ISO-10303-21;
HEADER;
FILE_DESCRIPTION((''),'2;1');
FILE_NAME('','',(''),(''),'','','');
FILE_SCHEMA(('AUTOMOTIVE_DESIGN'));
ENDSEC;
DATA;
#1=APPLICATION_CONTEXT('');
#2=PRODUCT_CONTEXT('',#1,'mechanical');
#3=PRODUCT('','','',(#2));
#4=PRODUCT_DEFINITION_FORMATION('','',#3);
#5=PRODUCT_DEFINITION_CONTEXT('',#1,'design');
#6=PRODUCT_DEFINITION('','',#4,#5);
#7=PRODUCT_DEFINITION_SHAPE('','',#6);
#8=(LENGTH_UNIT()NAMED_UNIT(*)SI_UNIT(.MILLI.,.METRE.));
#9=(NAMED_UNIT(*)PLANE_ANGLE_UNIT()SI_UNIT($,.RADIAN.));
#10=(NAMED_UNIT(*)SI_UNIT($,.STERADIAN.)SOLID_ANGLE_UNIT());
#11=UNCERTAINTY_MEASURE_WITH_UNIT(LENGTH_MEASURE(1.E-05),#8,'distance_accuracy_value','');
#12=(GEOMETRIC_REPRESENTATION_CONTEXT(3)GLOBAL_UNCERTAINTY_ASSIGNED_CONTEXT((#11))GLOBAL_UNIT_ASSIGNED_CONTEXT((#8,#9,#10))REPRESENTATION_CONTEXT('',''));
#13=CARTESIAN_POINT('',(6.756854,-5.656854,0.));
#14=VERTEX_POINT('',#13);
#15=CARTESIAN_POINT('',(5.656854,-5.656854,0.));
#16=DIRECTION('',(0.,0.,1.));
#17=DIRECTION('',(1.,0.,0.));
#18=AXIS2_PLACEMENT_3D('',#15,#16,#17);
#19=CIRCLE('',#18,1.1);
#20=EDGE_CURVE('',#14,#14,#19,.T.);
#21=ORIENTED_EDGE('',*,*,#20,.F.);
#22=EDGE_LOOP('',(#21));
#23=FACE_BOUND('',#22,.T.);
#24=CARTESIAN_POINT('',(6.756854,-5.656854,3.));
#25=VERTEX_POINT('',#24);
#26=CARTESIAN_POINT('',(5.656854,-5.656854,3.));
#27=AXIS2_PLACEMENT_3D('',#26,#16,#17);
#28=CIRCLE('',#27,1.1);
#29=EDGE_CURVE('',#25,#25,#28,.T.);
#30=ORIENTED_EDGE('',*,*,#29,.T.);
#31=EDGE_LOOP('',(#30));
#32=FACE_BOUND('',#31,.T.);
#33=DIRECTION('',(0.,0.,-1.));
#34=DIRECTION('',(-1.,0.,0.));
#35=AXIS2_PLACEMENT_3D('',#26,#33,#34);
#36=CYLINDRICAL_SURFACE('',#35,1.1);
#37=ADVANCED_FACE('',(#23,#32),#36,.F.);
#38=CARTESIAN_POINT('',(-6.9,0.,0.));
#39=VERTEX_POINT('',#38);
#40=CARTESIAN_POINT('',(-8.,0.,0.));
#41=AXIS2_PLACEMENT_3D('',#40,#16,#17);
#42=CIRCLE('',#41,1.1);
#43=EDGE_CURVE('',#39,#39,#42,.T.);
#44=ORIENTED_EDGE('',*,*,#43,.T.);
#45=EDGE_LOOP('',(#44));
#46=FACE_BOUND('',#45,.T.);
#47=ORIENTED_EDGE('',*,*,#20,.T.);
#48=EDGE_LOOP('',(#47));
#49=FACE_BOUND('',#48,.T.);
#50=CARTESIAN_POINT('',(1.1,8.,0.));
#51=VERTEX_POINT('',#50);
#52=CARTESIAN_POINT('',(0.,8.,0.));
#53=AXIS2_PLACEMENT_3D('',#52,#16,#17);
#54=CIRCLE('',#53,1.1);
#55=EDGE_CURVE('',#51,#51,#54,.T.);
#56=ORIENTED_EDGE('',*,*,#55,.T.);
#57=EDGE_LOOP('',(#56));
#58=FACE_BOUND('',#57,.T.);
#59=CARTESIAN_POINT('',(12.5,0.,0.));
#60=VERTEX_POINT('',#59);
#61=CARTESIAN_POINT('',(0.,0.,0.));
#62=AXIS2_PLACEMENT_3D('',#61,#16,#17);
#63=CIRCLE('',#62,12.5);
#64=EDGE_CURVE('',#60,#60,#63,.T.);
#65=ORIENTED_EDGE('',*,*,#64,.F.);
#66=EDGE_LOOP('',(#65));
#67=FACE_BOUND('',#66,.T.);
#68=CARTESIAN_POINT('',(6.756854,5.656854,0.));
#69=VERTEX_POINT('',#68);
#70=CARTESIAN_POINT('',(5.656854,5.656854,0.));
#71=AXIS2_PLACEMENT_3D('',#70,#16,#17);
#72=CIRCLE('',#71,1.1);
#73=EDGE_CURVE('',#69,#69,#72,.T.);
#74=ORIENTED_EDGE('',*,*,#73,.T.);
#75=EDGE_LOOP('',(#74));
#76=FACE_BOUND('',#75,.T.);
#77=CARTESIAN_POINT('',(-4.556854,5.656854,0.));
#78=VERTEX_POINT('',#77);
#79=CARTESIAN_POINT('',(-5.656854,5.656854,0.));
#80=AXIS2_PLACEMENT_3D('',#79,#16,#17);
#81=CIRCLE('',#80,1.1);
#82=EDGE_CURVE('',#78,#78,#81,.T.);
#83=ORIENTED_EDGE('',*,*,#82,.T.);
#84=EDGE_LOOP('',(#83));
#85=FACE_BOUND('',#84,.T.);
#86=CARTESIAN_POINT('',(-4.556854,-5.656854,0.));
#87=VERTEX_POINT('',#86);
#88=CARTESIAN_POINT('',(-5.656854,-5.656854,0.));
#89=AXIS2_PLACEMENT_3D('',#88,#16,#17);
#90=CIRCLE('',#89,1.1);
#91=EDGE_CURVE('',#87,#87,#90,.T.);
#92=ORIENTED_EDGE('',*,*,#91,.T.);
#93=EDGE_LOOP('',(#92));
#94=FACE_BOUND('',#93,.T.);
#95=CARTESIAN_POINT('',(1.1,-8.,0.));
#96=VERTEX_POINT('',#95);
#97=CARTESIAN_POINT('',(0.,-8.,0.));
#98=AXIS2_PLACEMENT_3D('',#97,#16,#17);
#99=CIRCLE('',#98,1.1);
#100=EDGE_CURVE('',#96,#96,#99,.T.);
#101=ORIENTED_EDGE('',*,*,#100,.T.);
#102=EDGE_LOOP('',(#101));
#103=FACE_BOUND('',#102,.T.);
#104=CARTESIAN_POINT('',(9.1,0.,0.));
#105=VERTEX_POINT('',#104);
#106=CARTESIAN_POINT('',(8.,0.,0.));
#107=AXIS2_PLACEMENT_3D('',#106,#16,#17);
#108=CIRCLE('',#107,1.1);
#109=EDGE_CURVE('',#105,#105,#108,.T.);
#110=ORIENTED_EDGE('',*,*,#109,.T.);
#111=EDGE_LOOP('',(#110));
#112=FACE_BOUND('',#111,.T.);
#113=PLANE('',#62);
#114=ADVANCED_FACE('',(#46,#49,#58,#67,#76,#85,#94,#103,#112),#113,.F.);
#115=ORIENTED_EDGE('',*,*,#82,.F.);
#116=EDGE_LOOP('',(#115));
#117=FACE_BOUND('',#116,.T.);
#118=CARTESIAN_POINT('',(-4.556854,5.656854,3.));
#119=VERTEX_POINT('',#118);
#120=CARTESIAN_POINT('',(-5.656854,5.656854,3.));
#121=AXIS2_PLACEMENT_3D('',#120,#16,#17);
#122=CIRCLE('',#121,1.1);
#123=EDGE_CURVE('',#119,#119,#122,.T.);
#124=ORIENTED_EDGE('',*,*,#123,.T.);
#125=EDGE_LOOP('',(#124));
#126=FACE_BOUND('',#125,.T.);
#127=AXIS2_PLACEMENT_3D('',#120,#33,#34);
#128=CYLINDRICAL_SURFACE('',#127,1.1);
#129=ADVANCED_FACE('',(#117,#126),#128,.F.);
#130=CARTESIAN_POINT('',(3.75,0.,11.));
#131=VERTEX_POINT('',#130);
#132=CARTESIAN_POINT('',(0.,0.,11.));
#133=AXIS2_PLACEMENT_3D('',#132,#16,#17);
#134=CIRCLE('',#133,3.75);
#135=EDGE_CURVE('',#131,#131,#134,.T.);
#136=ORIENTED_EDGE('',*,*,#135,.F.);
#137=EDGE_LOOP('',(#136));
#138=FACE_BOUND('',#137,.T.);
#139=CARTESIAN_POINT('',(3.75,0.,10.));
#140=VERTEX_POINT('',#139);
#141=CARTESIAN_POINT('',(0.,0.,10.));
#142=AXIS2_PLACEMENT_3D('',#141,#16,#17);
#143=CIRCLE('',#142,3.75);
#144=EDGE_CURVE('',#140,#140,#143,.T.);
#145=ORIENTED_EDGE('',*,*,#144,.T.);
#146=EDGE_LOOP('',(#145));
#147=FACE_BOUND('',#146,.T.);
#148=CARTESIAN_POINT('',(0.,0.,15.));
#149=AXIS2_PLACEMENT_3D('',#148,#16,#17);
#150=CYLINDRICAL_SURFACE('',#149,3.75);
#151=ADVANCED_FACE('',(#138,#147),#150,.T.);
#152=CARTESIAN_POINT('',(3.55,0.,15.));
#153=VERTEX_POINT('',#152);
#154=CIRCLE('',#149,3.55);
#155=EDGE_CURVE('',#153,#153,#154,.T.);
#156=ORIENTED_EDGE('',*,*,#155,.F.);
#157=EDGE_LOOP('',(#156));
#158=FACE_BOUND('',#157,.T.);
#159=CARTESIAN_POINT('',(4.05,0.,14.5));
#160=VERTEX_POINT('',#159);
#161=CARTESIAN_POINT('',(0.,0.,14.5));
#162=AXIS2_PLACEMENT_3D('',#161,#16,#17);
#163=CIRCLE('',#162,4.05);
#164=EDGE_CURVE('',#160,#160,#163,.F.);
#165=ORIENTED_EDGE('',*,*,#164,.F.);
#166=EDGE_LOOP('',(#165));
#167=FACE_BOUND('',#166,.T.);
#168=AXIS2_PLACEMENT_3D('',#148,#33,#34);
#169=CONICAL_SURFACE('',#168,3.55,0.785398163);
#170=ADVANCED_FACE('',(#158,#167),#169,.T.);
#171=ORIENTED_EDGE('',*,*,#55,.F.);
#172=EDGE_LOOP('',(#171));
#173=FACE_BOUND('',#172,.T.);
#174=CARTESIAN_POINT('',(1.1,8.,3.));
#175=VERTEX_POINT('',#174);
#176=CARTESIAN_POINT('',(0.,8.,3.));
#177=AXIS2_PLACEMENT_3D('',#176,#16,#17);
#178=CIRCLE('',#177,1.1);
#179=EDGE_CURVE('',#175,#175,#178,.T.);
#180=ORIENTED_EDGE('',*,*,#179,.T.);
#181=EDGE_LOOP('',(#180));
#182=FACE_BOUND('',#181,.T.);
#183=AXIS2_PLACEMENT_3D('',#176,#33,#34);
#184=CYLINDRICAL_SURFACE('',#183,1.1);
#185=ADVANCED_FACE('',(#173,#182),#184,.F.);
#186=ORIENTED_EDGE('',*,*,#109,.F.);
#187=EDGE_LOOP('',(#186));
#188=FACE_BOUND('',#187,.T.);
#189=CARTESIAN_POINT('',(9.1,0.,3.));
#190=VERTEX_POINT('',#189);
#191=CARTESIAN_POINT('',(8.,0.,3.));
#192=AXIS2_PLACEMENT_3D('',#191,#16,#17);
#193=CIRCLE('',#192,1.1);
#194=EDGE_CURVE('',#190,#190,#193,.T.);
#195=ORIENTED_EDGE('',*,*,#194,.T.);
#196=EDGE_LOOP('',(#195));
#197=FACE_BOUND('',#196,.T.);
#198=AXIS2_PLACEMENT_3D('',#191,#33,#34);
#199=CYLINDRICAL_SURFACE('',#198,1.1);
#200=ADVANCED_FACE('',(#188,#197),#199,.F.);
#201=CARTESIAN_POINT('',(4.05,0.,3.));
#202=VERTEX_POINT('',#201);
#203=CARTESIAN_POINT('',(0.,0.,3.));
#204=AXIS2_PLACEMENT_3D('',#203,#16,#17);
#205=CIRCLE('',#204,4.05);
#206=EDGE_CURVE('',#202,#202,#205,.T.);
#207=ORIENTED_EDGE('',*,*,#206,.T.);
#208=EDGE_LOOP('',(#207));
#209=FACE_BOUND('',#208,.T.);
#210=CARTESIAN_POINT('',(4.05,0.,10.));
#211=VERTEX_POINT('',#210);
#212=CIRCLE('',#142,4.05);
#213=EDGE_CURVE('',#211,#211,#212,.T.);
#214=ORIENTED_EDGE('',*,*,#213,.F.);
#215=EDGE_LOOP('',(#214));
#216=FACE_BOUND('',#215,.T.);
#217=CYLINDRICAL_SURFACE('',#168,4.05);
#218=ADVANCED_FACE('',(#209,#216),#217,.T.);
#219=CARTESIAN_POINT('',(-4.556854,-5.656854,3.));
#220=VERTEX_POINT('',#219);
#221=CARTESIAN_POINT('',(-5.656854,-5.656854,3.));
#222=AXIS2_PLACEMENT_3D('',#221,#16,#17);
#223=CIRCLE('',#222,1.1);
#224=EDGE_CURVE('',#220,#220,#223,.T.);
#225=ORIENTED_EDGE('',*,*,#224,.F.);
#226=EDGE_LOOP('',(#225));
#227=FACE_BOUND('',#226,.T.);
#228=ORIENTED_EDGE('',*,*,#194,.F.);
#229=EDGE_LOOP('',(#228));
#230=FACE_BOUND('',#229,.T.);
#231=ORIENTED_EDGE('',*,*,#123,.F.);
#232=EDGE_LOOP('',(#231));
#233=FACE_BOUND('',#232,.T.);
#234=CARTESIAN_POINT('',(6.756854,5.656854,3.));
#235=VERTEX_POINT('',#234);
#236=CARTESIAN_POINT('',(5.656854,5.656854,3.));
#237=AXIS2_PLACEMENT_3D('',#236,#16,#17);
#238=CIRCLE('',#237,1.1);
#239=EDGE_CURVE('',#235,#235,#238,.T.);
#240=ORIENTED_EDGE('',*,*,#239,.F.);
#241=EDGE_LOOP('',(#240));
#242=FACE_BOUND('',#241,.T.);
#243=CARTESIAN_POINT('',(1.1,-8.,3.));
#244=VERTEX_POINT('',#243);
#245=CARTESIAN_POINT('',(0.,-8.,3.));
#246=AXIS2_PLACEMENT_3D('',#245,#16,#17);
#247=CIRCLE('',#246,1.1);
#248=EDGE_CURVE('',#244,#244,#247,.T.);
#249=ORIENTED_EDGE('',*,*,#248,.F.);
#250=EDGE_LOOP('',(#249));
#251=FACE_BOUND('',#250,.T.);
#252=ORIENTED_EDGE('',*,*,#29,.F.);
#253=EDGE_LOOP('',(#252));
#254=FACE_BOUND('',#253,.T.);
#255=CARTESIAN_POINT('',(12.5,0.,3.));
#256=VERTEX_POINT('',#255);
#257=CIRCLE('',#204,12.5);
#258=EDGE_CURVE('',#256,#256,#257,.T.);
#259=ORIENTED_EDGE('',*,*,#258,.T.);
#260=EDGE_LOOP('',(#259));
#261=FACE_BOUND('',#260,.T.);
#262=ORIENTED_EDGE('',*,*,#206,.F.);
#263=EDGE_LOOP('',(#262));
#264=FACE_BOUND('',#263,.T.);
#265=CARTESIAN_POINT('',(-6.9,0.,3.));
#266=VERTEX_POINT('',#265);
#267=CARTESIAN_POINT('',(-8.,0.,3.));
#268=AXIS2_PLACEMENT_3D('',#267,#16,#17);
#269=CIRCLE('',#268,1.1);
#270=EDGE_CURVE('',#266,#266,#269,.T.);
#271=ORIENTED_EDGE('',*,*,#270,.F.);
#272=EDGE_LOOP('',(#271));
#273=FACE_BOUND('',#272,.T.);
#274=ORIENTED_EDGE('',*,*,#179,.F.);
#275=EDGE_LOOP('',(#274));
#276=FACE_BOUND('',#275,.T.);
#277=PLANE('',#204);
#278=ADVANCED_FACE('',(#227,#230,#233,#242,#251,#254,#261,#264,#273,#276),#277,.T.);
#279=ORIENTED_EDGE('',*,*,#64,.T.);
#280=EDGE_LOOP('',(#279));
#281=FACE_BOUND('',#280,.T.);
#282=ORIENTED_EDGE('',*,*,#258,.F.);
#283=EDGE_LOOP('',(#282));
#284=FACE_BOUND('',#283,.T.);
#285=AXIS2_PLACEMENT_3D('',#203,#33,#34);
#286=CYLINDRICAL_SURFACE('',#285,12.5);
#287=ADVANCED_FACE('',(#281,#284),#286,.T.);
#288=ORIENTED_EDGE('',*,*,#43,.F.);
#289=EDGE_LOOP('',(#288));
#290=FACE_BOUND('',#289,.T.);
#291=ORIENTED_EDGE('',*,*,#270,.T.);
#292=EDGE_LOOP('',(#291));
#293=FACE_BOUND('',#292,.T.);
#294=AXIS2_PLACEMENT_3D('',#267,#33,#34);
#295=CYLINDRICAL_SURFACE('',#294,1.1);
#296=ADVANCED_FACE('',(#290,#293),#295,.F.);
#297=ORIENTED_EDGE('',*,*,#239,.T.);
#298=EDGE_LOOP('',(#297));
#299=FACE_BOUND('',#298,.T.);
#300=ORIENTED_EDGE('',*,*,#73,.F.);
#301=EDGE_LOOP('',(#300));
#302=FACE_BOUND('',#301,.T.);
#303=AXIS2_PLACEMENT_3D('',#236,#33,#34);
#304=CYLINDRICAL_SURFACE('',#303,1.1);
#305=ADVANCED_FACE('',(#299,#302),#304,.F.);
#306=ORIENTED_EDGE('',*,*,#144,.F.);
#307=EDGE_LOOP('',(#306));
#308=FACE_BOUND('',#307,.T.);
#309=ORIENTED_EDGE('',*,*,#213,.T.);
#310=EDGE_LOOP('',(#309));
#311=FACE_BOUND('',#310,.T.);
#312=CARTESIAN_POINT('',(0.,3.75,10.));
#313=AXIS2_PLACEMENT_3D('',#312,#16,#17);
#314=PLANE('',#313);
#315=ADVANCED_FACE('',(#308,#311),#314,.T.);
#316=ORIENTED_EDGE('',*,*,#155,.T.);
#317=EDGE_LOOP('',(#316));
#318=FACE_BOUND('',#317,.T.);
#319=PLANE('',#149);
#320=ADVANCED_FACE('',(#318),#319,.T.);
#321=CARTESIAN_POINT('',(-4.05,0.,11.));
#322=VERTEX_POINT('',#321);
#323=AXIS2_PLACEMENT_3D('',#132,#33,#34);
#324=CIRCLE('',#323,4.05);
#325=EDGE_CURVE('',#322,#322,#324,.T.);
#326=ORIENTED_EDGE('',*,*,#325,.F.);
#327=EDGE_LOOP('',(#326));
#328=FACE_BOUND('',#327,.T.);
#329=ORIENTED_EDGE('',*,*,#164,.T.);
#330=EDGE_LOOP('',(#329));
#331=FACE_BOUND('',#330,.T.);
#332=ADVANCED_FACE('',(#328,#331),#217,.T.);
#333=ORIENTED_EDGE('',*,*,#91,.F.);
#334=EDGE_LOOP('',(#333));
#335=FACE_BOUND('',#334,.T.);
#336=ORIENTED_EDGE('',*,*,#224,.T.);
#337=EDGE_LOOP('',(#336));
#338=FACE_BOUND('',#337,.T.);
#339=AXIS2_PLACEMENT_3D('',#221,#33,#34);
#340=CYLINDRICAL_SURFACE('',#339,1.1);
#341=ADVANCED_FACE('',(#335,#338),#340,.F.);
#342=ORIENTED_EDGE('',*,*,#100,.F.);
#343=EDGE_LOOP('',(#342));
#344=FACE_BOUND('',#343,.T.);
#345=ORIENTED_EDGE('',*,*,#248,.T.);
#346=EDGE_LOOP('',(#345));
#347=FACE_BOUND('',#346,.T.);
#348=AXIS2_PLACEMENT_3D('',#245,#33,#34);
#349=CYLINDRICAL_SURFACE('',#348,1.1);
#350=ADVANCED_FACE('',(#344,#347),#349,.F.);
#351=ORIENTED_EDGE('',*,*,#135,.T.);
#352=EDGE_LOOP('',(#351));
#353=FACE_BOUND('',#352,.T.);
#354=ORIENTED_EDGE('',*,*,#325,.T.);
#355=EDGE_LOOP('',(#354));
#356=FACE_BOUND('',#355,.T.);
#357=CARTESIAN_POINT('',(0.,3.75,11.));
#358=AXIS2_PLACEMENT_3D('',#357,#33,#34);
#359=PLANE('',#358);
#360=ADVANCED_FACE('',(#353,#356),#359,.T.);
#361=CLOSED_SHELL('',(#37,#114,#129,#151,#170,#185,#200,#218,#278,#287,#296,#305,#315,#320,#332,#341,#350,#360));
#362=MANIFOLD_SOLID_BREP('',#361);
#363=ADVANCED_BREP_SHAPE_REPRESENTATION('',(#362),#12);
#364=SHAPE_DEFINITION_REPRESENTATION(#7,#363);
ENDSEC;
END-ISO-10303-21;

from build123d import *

# Parameters (mm, degrees)
SKETCH1_R           = 12.5
SKETCH1_R_2         = 1.1
BOSS_EXTRUDE1_DEPTH = 3
SKETCH2_R           = 4.05
BOSS_EXTRUDE2_DEPTH = 12
SKETCH3_W           = 1
SKETCH3_H           = 0.6
FILLET1_SIZE        = 0.5


with BuildPart() as part:
    # Sketch1 → Boss-Extrude1 (new body)
    with BuildSketch(Plane.XY):
        Circle(SKETCH1_R)
        with Locations((0, 8)):
            Circle(SKETCH1_R_2, mode=Mode.SUBTRACT)
        with Locations((5.656854249, 5.656854249)):
            Circle(SKETCH1_R_2, mode=Mode.SUBTRACT)
        with Locations((8, 0)):
            Circle(SKETCH1_R_2, mode=Mode.SUBTRACT)
        with Locations((5.656854249, -5.656854249)):
            Circle(SKETCH1_R_2, mode=Mode.SUBTRACT)
        with Locations((0, -8)):
            Circle(SKETCH1_R_2, mode=Mode.SUBTRACT)
        with Locations((-5.656854249, -5.656854249)):
            Circle(SKETCH1_R_2, mode=Mode.SUBTRACT)
        with Locations((-8, 0)):
            Circle(SKETCH1_R_2, mode=Mode.SUBTRACT)
        with Locations((-5.656854249, 5.656854249)):
            Circle(SKETCH1_R_2, mode=Mode.SUBTRACT)
    extrude(amount=BOSS_EXTRUDE1_DEPTH)

    # Sketch2 → Boss-Extrude2 (add)
    with BuildSketch(Plane.XY.offset(3)):
        Circle(SKETCH2_R)
    extrude(amount=BOSS_EXTRUDE2_DEPTH)

    # Sketch3 → Cut-Revolve1 (revolve, cut)
    with BuildSketch(Plane(origin=(0, 0, 0), x_dir=(0, 0, -1), z_dir=(1, 0, 0))):
        with Locations((-10.5, 4.05)):
            Rectangle(SKETCH3_W, SKETCH3_H)
    revolve(axis=Axis((0, 0, 15), (0, 0, -1)), mode=Mode.SUBTRACT)

    # Fillet1
    fillet1_edges = [part.edges().sort_by_distance(p)[0] for p in [
        (-4.05, 0, 15),
    ]]
    chamfer(fillet1_edges, length=FILLET1_SIZE)


solid = part.part
